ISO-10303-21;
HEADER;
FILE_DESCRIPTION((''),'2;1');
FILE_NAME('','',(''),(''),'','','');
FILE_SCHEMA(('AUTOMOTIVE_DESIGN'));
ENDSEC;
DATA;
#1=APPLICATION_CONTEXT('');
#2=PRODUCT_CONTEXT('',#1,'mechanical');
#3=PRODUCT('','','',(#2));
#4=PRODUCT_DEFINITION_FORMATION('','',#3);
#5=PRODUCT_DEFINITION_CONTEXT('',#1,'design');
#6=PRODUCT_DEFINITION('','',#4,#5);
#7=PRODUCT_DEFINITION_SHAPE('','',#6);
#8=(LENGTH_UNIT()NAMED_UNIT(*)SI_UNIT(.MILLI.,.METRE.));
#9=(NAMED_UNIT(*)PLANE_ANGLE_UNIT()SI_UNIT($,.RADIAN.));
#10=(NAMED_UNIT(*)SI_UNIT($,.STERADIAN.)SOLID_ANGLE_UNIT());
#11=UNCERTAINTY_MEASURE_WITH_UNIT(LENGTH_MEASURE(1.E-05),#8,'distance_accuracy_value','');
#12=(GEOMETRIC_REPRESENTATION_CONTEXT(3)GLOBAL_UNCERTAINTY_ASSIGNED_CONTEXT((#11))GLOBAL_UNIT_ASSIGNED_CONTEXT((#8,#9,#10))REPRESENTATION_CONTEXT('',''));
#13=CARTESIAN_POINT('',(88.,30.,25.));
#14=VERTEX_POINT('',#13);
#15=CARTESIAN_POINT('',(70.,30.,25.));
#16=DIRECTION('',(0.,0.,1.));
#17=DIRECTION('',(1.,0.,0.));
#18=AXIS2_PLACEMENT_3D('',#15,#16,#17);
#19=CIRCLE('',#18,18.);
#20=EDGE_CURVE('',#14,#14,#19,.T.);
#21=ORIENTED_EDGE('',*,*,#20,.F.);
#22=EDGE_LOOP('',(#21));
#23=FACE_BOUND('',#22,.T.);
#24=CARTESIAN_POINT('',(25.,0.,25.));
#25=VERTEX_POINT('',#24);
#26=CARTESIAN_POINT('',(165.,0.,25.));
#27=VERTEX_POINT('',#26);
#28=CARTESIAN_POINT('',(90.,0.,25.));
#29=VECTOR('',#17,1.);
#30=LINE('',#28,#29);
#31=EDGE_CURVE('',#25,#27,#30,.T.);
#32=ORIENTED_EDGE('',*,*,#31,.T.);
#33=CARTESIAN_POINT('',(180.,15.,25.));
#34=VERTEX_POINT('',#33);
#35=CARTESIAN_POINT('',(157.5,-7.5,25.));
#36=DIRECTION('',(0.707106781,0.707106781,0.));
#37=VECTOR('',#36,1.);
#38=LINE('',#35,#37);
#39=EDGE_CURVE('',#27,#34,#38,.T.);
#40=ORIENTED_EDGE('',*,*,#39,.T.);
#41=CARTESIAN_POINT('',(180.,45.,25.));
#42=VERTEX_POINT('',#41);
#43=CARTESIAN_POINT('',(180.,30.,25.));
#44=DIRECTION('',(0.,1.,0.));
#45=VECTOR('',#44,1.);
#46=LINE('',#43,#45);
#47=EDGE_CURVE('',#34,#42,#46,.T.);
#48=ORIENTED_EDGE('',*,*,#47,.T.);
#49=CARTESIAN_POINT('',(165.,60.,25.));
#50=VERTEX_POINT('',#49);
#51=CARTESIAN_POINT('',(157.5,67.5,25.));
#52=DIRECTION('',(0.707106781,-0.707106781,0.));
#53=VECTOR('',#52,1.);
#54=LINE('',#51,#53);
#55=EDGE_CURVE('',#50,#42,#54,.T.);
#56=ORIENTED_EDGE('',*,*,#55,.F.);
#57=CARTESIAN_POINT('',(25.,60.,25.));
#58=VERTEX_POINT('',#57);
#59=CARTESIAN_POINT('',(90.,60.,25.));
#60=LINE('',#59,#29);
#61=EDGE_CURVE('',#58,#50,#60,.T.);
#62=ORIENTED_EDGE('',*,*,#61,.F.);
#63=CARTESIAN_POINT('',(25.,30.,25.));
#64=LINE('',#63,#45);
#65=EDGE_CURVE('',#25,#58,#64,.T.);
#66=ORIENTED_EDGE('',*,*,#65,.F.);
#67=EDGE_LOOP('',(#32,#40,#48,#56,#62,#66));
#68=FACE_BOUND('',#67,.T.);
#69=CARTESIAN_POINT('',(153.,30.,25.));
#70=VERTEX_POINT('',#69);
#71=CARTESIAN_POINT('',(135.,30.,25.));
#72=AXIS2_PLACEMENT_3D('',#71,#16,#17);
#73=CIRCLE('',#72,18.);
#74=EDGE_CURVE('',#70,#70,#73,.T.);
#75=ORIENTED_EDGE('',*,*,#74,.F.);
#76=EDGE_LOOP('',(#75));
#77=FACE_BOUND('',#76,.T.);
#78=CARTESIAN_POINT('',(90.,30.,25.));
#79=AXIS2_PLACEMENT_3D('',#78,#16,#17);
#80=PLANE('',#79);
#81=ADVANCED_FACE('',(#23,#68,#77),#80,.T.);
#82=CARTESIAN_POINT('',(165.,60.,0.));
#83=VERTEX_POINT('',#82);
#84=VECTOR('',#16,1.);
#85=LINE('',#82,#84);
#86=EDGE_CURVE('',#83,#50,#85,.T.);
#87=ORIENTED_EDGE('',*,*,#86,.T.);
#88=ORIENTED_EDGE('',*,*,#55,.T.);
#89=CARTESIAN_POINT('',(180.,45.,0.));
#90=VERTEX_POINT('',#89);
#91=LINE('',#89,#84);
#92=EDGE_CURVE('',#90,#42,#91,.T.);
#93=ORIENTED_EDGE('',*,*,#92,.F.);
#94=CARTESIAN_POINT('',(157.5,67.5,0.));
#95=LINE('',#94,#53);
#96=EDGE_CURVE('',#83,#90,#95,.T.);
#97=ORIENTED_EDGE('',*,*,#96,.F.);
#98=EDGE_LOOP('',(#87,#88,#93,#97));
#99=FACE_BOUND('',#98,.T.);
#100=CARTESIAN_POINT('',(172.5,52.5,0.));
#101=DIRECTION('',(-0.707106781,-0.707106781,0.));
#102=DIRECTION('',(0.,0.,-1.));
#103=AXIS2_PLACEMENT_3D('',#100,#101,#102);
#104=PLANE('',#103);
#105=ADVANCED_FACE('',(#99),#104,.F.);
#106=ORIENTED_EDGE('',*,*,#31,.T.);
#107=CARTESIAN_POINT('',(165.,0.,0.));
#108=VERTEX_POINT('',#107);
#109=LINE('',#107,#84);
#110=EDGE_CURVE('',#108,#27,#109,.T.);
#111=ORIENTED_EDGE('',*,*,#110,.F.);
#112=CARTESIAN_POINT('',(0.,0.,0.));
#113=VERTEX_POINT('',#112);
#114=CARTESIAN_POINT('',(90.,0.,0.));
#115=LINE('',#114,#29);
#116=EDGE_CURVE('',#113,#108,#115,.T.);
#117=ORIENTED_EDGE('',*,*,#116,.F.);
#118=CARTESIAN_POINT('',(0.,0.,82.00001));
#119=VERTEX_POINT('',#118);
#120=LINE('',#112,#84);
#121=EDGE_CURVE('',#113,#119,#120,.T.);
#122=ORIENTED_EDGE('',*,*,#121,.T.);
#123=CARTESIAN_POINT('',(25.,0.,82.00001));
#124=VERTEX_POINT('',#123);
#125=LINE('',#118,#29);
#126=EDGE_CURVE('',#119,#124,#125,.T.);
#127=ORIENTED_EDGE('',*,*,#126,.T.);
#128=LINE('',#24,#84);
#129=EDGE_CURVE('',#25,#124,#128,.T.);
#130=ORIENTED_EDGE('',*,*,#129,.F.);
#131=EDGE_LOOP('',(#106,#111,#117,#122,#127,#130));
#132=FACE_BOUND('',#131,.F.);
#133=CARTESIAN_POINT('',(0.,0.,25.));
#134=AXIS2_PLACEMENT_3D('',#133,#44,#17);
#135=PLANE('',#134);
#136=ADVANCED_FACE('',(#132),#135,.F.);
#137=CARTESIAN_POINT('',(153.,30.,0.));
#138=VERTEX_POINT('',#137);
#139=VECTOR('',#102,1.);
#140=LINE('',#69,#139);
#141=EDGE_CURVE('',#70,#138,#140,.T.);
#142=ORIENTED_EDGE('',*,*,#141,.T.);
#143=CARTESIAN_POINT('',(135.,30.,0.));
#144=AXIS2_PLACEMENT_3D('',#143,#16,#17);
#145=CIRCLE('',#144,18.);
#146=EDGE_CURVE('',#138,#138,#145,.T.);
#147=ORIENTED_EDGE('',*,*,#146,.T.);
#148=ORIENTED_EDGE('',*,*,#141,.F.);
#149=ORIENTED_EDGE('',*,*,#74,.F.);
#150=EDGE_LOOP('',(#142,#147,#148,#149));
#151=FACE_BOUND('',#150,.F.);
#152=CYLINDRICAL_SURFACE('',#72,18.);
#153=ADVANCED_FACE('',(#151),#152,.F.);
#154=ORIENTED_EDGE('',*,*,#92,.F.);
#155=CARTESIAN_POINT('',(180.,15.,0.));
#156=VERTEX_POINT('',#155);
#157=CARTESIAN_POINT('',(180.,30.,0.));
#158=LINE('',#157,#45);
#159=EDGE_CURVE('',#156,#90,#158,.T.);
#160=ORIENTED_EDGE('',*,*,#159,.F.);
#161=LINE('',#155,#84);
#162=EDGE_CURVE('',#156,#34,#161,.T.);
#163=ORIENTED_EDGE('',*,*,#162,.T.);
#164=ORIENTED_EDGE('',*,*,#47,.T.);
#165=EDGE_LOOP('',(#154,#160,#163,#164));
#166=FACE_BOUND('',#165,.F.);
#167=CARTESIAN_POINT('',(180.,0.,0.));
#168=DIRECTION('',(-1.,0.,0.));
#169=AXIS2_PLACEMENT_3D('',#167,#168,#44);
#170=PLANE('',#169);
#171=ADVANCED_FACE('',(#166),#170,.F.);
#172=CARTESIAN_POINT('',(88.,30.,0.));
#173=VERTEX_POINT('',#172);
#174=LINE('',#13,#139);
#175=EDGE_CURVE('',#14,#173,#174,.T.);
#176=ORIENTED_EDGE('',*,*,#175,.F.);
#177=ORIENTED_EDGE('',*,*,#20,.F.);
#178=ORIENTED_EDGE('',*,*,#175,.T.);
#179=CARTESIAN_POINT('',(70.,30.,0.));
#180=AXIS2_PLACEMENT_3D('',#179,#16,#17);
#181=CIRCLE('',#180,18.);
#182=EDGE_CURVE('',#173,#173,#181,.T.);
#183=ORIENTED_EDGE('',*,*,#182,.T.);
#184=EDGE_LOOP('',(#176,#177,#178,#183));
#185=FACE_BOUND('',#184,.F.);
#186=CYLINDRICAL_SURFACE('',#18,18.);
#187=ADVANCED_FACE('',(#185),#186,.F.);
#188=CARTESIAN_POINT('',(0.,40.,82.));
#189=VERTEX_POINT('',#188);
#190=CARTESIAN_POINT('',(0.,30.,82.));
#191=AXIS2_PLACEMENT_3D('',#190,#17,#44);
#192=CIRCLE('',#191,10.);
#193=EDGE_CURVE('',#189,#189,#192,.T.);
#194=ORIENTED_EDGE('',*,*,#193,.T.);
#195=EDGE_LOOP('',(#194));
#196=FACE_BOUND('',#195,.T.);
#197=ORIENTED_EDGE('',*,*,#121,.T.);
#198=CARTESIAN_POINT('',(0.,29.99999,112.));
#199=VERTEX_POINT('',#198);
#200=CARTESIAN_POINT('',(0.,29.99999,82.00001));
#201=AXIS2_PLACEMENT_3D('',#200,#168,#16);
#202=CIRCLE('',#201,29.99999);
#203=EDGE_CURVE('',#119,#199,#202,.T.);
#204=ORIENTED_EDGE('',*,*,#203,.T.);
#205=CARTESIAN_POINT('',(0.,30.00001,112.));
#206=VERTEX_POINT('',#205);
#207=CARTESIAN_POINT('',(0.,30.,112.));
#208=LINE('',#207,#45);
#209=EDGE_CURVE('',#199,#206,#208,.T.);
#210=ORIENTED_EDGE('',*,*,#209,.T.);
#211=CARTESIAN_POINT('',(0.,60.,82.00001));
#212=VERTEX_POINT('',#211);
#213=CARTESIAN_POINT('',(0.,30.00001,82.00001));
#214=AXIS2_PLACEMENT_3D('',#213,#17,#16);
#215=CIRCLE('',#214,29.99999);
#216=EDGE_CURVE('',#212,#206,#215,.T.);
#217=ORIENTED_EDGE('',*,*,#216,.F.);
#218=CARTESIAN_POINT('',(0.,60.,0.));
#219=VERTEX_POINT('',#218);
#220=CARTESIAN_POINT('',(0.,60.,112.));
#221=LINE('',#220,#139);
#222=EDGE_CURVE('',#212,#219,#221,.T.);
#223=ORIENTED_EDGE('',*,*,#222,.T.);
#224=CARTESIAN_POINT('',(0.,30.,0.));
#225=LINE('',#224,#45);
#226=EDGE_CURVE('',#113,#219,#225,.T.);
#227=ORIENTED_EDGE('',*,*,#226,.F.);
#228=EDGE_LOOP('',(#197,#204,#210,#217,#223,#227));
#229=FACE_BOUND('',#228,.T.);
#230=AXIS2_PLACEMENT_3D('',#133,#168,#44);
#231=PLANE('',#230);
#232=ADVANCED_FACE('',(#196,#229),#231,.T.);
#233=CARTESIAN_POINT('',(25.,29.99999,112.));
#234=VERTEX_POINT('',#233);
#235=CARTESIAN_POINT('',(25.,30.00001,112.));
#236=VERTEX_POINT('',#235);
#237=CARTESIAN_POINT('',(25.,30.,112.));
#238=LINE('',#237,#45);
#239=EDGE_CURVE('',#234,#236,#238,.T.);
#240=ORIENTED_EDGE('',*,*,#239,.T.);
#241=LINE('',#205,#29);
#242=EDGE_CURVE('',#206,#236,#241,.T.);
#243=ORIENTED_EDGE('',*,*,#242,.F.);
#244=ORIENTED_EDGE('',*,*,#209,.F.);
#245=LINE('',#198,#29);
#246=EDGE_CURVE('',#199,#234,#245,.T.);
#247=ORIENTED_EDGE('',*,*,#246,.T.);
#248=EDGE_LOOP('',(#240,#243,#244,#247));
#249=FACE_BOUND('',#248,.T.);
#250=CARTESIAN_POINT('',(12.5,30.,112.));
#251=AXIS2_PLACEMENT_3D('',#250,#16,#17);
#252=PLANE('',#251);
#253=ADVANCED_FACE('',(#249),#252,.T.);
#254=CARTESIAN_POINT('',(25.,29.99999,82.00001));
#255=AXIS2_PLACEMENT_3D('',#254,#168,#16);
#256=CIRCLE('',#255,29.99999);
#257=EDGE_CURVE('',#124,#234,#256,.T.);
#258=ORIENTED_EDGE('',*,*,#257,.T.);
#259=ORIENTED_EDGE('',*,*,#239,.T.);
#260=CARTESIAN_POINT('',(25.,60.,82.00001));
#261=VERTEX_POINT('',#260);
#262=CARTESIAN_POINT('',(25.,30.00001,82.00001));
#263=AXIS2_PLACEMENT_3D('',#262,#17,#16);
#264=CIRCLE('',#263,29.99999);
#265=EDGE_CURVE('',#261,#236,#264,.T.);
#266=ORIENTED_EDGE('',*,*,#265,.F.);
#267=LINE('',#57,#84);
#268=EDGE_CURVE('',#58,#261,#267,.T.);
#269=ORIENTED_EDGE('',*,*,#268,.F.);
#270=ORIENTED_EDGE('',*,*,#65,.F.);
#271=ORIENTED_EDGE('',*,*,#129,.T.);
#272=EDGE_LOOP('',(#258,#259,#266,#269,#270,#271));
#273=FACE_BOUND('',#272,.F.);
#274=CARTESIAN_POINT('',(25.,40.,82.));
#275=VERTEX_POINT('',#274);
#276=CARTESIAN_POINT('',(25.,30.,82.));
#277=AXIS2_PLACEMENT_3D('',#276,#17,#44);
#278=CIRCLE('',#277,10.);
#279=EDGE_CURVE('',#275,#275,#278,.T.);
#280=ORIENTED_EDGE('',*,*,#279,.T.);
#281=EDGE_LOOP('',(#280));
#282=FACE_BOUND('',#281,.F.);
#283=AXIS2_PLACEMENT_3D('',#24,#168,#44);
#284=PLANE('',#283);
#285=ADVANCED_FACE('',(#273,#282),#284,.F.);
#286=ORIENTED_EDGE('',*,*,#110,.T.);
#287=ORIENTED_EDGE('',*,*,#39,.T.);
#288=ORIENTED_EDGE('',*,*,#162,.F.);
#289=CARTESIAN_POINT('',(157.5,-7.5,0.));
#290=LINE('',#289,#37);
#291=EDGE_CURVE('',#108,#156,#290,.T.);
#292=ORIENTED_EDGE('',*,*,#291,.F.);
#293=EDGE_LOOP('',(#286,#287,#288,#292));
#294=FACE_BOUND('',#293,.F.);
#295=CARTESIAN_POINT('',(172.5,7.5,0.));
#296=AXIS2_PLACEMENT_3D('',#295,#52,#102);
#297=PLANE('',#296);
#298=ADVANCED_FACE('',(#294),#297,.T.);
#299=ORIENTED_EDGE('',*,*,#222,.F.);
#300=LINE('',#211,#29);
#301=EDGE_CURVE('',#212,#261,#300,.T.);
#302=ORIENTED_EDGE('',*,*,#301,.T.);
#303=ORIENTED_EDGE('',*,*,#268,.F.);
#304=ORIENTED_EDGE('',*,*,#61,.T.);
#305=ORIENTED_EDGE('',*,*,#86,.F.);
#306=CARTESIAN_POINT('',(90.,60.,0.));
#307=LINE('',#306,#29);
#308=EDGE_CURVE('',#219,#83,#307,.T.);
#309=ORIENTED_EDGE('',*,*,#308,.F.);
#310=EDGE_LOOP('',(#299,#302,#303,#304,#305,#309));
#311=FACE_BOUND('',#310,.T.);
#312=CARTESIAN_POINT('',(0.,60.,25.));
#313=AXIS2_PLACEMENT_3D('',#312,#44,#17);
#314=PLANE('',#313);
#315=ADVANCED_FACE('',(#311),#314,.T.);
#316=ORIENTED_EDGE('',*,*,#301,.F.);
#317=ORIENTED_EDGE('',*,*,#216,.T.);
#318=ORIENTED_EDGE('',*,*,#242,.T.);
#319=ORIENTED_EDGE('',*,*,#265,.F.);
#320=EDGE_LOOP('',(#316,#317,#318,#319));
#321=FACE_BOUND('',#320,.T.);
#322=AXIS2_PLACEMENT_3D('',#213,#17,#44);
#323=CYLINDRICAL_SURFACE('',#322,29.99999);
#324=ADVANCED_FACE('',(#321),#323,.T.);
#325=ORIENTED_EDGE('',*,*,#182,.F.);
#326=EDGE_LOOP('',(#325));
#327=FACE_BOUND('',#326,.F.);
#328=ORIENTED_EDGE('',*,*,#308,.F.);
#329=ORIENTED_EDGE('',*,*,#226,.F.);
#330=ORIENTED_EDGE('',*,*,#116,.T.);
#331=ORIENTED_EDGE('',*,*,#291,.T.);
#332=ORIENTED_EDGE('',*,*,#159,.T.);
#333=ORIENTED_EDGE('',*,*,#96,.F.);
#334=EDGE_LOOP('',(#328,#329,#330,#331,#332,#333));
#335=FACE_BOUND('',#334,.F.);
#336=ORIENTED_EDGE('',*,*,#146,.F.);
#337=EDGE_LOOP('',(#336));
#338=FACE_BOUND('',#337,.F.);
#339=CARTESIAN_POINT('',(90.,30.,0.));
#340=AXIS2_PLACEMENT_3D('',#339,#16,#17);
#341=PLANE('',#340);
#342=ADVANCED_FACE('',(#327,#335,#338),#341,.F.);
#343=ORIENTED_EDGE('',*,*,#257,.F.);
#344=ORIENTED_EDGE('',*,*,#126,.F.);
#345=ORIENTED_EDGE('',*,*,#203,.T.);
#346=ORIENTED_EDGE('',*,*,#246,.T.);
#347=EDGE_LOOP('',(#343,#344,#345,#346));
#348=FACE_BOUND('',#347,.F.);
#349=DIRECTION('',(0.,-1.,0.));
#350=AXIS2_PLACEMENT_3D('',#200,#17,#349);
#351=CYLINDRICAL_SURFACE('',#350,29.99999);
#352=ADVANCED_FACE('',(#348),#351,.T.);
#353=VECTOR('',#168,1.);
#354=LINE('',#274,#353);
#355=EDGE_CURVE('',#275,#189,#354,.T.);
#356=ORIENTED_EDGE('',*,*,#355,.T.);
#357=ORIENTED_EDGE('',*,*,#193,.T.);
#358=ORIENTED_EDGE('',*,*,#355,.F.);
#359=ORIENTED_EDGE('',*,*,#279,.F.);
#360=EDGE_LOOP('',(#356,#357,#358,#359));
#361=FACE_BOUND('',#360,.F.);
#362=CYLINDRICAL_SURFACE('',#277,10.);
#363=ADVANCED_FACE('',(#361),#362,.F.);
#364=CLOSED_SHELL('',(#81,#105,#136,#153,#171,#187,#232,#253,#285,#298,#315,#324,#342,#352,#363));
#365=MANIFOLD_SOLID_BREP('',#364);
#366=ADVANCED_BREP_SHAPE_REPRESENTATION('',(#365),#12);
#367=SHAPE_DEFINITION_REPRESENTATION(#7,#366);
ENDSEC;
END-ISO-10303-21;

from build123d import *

# Parameters (mm, degrees)
F0_W     = 180
F0_H     = 60
F1_DEPTH = 25
F2_W     = 25
F2_H     = 60
F3_DEPTH = 87
F4_R     = 29.99999
F5_SIZE  = 15
F6_R     = 18
F7_DEPTH = 25
F8_R     = 10
F9_DEPTH = 25.001


# Not quite as in the source:
# - a fillet or chamfer is up to 0.001 mm smaller than in the source, because OpenCascade refuses the exact size


with BuildPart() as f1:
    # F0 (on Top) → F1 (new body)
    with BuildSketch(Plane.XY):
        with Locations((90, 30)):
            Rectangle(F0_W, F0_H)
    extrude(amount=F1_DEPTH)

    # F2 (on face) → F3 (join)
    with BuildSketch(Plane.XY.offset(25)):
        with Locations((12.5, 30)):
            Rectangle(F2_W, F2_H)
    extrude(amount=F3_DEPTH)

    # F4 (radius 30 in the source; OpenCascade refuses exactly that, so slightly less here)
    f4_edges = [f1.edges().sort_by_distance(p)[0] for p in [
        (12.5, 0, 112),
        (12.5, 60, 112),
    ]]
    fillet(f4_edges, radius=F4_R)

    # F5
    f5_edges = [f1.edges().sort_by_distance(p)[0] for p in [
        (180, 0, 12.5),
        (180, 60, 12.5),
    ]]
    chamfer(f5_edges, length=F5_SIZE)

    # F6 (on face) → F7 (cut)
    with BuildSketch(Plane.XY.offset(25)):
        with Locations((70, 30)):
            Circle(F6_R)
        with Locations((135, 30)):
            Circle(F6_R)
    extrude(amount=-F7_DEPTH, mode=Mode.SUBTRACT)

    # F8 (on face) → F9 (cut, through all)
    with BuildSketch(Plane.YZ.offset(25)):
        with Locations((30, 82)):
            Circle(F8_R)
    extrude(amount=-F9_DEPTH, mode=Mode.SUBTRACT)


solid = f1.part
